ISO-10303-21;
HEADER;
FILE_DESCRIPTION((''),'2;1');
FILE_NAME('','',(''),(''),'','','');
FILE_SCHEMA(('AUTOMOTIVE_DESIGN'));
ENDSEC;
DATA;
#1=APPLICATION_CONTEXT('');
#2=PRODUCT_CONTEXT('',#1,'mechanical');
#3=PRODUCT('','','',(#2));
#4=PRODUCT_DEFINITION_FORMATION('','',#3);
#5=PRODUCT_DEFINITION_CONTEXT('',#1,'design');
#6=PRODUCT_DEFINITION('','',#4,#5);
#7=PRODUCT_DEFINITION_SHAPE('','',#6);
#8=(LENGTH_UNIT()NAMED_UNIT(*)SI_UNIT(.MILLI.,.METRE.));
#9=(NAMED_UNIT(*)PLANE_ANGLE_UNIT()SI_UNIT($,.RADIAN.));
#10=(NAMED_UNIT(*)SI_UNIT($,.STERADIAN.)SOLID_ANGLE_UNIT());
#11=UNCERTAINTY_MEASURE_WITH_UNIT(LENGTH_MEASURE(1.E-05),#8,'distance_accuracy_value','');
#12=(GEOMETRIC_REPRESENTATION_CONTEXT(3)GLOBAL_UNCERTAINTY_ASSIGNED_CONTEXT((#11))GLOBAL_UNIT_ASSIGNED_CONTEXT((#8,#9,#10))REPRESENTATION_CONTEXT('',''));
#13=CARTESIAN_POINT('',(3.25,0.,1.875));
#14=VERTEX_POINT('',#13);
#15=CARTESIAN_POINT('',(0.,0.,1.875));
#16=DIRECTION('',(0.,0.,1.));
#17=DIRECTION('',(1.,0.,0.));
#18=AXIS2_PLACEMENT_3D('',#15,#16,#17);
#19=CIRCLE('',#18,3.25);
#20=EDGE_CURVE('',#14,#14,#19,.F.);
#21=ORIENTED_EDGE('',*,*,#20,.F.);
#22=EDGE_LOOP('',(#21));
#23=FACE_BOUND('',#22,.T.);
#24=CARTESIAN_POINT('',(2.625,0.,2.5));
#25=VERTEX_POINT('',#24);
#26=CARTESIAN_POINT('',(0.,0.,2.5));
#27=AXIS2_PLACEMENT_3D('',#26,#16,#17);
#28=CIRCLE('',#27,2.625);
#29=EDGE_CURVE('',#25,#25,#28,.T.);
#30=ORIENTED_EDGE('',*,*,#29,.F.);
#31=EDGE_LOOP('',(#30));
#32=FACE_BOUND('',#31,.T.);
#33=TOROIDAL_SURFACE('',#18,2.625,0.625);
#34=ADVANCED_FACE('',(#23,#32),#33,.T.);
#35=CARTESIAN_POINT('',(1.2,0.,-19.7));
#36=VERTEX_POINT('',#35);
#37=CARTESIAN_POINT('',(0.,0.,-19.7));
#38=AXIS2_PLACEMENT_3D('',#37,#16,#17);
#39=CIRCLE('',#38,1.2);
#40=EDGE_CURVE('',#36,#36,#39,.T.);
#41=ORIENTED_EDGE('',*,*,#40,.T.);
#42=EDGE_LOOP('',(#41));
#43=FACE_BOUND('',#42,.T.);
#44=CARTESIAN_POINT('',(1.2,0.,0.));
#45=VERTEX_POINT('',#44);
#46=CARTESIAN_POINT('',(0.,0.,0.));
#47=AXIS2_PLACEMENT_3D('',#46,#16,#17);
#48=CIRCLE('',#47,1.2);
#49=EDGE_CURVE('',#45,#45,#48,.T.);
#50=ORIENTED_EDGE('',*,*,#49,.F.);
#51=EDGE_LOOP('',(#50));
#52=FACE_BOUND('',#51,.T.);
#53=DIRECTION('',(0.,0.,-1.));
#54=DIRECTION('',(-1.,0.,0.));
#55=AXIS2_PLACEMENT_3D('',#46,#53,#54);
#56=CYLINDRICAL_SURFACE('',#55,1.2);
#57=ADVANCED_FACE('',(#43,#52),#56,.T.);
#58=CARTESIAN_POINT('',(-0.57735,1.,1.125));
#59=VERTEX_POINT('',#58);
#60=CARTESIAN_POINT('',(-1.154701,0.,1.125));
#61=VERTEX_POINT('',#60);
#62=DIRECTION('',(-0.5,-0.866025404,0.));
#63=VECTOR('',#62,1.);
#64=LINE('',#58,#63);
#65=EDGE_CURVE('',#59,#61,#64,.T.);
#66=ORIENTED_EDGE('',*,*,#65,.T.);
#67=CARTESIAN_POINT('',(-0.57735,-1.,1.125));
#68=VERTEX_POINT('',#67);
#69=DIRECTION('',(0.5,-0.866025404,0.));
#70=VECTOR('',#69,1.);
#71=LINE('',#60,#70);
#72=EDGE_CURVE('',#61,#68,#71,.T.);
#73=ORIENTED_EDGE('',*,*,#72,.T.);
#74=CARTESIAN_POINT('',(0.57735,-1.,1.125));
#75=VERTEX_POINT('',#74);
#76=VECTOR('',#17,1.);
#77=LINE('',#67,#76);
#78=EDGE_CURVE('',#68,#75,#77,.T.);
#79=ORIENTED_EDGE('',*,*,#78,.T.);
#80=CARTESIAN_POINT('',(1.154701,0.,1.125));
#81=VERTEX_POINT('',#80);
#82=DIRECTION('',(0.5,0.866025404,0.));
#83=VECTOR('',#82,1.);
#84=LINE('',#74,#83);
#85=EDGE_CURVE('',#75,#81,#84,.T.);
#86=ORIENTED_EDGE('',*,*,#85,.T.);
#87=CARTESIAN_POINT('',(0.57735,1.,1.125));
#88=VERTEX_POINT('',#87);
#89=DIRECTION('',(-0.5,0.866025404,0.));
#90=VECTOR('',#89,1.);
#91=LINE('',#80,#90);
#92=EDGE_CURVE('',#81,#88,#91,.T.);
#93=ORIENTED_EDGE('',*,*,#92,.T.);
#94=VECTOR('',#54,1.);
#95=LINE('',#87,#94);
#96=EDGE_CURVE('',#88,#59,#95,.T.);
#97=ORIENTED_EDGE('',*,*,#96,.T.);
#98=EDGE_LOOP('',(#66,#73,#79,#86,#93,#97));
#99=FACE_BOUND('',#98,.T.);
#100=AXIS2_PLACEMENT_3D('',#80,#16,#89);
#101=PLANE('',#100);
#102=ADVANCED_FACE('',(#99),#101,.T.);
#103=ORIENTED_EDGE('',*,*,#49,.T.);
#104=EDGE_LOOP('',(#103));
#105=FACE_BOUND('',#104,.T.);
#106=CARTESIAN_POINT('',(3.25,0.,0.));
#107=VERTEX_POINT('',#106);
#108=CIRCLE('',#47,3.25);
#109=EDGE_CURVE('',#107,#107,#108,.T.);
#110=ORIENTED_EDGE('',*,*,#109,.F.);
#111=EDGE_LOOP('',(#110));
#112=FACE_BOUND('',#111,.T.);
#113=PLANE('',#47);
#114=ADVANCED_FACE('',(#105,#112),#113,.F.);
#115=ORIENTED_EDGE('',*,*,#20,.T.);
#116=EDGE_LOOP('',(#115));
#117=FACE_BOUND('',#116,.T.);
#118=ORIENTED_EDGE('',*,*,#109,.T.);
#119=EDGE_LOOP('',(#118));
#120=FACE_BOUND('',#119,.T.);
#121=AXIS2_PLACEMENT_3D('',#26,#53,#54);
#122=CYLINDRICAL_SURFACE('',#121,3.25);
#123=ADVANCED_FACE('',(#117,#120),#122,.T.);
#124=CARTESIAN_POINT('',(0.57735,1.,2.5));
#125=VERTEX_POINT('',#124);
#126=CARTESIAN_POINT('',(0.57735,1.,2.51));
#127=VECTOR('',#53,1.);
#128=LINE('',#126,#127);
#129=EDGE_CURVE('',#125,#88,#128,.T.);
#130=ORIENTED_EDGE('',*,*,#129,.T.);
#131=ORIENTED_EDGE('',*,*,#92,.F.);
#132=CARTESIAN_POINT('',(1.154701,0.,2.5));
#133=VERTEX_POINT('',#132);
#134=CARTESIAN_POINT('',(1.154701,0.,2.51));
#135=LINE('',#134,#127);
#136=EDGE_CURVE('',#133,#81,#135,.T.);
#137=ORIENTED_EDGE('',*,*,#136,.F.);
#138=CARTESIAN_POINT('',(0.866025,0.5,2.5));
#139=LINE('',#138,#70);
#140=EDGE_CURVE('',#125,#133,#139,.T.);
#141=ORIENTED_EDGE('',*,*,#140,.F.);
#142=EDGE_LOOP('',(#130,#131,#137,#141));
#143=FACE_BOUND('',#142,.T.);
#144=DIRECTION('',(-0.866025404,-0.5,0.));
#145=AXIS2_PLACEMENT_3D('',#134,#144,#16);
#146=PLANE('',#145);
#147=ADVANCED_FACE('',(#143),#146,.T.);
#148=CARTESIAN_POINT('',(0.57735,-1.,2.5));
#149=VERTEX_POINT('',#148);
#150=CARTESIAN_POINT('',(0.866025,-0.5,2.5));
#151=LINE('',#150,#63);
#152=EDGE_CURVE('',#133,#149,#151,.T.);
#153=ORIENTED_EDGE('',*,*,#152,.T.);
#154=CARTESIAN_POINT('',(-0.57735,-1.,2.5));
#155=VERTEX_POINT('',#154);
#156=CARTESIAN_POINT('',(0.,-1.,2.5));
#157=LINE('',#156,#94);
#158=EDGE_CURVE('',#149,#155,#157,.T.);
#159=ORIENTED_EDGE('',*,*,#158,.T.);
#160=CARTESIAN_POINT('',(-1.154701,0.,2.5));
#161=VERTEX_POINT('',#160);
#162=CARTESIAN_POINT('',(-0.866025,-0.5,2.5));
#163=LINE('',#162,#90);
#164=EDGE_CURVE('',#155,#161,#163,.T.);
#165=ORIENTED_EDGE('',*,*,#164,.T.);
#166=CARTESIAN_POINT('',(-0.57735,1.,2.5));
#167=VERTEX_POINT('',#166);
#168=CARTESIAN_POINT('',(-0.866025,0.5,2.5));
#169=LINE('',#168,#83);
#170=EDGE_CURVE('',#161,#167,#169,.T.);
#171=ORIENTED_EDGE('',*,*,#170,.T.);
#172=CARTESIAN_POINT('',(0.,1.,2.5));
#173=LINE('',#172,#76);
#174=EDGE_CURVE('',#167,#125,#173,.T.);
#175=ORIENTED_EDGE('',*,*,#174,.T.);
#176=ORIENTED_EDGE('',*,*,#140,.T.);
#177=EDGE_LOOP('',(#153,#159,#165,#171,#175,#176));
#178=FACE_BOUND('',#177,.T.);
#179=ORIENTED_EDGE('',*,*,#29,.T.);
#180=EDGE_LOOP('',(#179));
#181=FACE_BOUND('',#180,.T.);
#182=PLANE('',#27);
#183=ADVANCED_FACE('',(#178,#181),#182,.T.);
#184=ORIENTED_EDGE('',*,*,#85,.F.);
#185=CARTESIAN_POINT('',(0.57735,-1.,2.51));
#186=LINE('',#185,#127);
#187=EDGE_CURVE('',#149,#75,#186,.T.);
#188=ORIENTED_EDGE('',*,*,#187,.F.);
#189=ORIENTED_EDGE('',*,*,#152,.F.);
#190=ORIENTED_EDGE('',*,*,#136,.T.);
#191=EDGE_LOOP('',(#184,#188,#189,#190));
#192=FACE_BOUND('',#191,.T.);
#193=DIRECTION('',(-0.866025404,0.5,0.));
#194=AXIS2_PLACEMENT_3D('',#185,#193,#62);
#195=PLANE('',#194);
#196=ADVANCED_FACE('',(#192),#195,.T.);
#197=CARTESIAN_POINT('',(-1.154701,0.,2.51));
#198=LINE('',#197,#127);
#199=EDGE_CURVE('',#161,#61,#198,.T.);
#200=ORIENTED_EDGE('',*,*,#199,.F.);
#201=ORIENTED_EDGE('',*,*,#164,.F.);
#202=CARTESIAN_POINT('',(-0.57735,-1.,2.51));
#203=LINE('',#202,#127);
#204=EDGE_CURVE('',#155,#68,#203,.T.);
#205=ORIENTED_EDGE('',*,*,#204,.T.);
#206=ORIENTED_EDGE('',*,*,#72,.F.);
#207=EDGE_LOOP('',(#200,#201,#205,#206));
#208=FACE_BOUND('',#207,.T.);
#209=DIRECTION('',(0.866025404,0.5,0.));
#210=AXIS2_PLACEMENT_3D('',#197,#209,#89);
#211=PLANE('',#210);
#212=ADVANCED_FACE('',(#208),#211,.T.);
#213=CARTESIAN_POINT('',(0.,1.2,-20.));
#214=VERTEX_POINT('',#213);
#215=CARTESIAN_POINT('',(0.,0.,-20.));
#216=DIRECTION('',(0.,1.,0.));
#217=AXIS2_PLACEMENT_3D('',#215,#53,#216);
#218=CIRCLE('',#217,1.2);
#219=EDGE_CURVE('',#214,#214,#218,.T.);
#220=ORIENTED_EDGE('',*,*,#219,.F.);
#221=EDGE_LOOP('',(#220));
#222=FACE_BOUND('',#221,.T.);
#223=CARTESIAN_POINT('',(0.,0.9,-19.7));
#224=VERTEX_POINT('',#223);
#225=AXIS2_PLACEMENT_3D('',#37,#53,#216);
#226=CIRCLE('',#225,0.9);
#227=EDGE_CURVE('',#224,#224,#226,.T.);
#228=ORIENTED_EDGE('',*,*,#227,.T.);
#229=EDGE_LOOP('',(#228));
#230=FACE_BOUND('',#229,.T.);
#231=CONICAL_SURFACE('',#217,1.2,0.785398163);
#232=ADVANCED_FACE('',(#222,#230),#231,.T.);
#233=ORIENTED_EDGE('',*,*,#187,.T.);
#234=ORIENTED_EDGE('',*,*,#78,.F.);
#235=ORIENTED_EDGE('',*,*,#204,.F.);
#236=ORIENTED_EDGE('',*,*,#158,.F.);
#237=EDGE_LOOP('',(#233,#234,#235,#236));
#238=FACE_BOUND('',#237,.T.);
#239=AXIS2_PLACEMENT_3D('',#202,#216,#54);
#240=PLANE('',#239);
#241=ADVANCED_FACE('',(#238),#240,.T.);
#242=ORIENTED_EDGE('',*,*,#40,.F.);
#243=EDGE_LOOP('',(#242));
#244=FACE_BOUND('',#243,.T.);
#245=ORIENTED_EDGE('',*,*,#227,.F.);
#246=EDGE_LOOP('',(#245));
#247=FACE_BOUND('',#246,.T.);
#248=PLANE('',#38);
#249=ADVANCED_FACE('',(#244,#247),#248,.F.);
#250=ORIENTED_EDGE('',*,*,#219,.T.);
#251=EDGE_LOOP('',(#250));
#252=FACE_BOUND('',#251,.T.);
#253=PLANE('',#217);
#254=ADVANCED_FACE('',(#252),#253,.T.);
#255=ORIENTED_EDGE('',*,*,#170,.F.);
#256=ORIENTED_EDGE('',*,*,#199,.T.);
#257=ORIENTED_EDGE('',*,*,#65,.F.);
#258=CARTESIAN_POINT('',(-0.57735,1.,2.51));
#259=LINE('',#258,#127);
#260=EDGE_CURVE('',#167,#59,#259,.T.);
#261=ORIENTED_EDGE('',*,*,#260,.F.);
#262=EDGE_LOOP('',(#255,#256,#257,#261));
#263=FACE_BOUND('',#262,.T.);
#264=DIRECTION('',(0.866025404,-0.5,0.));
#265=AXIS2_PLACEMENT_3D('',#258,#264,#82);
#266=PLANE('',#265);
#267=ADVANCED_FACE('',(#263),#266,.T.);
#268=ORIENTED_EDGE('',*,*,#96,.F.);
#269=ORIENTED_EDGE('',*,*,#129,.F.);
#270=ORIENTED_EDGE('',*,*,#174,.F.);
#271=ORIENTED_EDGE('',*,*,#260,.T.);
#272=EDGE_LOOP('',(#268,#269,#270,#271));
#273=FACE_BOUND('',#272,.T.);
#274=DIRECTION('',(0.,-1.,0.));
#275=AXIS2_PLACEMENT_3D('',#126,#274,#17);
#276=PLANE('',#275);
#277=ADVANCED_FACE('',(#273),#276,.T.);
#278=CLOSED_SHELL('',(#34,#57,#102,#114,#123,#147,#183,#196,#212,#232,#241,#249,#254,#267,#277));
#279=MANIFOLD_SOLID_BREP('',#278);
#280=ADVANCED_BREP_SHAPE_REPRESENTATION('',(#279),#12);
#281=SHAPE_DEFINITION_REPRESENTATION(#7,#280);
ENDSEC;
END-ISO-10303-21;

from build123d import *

# Parameters (mm, degrees)
F_0090_CYLINDER_SKETCH_R    = 3.25
F_0090_CYLINDER_DEPTH       = 2.5
F_0091_FILLET_R             = 0.625
F_0092_EXTRUDE_DEPTH        = 1.385
F_0092_EXTRUDE_ROTATE_ANGLE = 120
F_0095_CYLINDER_SKETCH_R    = 1.2
F_0095_CYLINDER_DEPTH       = 19.7
F_0096_CONE_ROTATE_ANGLE    = 90


with BuildPart() as part:
    # 0090_cylinder_Sketch → 0090_cylinder (new body)
    with BuildSketch(Plane.XY):
        Circle(F_0090_CYLINDER_SKETCH_R)
    extrude(amount=F_0090_CYLINDER_DEPTH)

    # 0091_fillet
    f_0091_fillet_edges = [part.edges().sort_by_distance(p)[0] for p in [
        (-3.25, 0, 2.5),
    ]]
    fillet(f_0091_fillet_edges, radius=F_0091_FILLET_R)


with BuildPart() as body_2:
    # 0092_extrude_Sketch → 0092_extrude (new body)
    with BuildSketch(Plane.XY):
        Polygon((0, 0), (1.154700538, 0), (1.732050808, 1), (1.154700538, 2), (0, 2), (-0.577350269, 1), align=None)
    extrude(amount=F_0092_EXTRUDE_DEPTH)


with BuildPart() as body_2_1:
    # 0092_extrude_Rotate: read off the stored shape, not the designer's step
    # 0092_extrude_Rotate: moved
    add(body_2.part.rotate(Axis((0, 0, 0), (0, 0, 1)), F_0092_EXTRUDE_ROTATE_ANGLE))


with BuildPart() as body_2_2:
    # 0092_extrude_Translate: moved
    add(body_2_1.part.moved(Location((1.154700538, 0, 1.125))))


with BuildPart() as part_1:
    add(part.part)

    # 0094_sub: cut body 2
    add(body_2_2.part, mode=Mode.SUBTRACT)


with BuildPart() as body_2_2_1:
    # 0095_cylinder_Sketch → 0095_cylinder (new body)
    with BuildSketch(Plane.XY):
        Circle(F_0095_CYLINDER_SKETCH_R)
    extrude(amount=F_0095_CYLINDER_DEPTH)


with BuildPart() as body_2_2_2:
    # 0095_cylinder_Translate: moved
    add(body_2_2_1.part.moved(Location((0, 0, -19.7))))


with BuildPart() as body_3:
    # 0096_cone_Sketch → 0096_cone (revolve)
    with BuildSketch(Plane.XY, mode=Mode.PRIVATE) as f_0096_cone_sk:
        Polygon((0, 0), (1.2, 0), (0.9, 0.3), (0, 0.3), align=None)
    revolve(f_0096_cone_sk.sketch.rotate(Axis((0, -100, 0), (0, 1, 0)), 90), axis=Axis((0, -100, 0), (0, 1, 0)))


with BuildPart() as body_3_1:
    # 0096_cone_Rotate: moved
    add(body_3.part.rotate(Axis((0, 0, 0), (1, 0, 0)), F_0096_CONE_ROTATE_ANGLE))


with BuildPart() as body_3_2:
    # 0096_cone_Translate: moved
    add(body_3_1.part.moved(Location((0, 0, -20))))


with BuildPart() as body_2_2_3:
    add(body_2_2_2.part)

    # 0098_add: union body 3
    add(body_3_2.part)


with BuildPart() as part_2:
    add(part_1.part)

    # 0099_add: union body 2 2
    add(body_2_2_3.part)


solid = part_2.part
